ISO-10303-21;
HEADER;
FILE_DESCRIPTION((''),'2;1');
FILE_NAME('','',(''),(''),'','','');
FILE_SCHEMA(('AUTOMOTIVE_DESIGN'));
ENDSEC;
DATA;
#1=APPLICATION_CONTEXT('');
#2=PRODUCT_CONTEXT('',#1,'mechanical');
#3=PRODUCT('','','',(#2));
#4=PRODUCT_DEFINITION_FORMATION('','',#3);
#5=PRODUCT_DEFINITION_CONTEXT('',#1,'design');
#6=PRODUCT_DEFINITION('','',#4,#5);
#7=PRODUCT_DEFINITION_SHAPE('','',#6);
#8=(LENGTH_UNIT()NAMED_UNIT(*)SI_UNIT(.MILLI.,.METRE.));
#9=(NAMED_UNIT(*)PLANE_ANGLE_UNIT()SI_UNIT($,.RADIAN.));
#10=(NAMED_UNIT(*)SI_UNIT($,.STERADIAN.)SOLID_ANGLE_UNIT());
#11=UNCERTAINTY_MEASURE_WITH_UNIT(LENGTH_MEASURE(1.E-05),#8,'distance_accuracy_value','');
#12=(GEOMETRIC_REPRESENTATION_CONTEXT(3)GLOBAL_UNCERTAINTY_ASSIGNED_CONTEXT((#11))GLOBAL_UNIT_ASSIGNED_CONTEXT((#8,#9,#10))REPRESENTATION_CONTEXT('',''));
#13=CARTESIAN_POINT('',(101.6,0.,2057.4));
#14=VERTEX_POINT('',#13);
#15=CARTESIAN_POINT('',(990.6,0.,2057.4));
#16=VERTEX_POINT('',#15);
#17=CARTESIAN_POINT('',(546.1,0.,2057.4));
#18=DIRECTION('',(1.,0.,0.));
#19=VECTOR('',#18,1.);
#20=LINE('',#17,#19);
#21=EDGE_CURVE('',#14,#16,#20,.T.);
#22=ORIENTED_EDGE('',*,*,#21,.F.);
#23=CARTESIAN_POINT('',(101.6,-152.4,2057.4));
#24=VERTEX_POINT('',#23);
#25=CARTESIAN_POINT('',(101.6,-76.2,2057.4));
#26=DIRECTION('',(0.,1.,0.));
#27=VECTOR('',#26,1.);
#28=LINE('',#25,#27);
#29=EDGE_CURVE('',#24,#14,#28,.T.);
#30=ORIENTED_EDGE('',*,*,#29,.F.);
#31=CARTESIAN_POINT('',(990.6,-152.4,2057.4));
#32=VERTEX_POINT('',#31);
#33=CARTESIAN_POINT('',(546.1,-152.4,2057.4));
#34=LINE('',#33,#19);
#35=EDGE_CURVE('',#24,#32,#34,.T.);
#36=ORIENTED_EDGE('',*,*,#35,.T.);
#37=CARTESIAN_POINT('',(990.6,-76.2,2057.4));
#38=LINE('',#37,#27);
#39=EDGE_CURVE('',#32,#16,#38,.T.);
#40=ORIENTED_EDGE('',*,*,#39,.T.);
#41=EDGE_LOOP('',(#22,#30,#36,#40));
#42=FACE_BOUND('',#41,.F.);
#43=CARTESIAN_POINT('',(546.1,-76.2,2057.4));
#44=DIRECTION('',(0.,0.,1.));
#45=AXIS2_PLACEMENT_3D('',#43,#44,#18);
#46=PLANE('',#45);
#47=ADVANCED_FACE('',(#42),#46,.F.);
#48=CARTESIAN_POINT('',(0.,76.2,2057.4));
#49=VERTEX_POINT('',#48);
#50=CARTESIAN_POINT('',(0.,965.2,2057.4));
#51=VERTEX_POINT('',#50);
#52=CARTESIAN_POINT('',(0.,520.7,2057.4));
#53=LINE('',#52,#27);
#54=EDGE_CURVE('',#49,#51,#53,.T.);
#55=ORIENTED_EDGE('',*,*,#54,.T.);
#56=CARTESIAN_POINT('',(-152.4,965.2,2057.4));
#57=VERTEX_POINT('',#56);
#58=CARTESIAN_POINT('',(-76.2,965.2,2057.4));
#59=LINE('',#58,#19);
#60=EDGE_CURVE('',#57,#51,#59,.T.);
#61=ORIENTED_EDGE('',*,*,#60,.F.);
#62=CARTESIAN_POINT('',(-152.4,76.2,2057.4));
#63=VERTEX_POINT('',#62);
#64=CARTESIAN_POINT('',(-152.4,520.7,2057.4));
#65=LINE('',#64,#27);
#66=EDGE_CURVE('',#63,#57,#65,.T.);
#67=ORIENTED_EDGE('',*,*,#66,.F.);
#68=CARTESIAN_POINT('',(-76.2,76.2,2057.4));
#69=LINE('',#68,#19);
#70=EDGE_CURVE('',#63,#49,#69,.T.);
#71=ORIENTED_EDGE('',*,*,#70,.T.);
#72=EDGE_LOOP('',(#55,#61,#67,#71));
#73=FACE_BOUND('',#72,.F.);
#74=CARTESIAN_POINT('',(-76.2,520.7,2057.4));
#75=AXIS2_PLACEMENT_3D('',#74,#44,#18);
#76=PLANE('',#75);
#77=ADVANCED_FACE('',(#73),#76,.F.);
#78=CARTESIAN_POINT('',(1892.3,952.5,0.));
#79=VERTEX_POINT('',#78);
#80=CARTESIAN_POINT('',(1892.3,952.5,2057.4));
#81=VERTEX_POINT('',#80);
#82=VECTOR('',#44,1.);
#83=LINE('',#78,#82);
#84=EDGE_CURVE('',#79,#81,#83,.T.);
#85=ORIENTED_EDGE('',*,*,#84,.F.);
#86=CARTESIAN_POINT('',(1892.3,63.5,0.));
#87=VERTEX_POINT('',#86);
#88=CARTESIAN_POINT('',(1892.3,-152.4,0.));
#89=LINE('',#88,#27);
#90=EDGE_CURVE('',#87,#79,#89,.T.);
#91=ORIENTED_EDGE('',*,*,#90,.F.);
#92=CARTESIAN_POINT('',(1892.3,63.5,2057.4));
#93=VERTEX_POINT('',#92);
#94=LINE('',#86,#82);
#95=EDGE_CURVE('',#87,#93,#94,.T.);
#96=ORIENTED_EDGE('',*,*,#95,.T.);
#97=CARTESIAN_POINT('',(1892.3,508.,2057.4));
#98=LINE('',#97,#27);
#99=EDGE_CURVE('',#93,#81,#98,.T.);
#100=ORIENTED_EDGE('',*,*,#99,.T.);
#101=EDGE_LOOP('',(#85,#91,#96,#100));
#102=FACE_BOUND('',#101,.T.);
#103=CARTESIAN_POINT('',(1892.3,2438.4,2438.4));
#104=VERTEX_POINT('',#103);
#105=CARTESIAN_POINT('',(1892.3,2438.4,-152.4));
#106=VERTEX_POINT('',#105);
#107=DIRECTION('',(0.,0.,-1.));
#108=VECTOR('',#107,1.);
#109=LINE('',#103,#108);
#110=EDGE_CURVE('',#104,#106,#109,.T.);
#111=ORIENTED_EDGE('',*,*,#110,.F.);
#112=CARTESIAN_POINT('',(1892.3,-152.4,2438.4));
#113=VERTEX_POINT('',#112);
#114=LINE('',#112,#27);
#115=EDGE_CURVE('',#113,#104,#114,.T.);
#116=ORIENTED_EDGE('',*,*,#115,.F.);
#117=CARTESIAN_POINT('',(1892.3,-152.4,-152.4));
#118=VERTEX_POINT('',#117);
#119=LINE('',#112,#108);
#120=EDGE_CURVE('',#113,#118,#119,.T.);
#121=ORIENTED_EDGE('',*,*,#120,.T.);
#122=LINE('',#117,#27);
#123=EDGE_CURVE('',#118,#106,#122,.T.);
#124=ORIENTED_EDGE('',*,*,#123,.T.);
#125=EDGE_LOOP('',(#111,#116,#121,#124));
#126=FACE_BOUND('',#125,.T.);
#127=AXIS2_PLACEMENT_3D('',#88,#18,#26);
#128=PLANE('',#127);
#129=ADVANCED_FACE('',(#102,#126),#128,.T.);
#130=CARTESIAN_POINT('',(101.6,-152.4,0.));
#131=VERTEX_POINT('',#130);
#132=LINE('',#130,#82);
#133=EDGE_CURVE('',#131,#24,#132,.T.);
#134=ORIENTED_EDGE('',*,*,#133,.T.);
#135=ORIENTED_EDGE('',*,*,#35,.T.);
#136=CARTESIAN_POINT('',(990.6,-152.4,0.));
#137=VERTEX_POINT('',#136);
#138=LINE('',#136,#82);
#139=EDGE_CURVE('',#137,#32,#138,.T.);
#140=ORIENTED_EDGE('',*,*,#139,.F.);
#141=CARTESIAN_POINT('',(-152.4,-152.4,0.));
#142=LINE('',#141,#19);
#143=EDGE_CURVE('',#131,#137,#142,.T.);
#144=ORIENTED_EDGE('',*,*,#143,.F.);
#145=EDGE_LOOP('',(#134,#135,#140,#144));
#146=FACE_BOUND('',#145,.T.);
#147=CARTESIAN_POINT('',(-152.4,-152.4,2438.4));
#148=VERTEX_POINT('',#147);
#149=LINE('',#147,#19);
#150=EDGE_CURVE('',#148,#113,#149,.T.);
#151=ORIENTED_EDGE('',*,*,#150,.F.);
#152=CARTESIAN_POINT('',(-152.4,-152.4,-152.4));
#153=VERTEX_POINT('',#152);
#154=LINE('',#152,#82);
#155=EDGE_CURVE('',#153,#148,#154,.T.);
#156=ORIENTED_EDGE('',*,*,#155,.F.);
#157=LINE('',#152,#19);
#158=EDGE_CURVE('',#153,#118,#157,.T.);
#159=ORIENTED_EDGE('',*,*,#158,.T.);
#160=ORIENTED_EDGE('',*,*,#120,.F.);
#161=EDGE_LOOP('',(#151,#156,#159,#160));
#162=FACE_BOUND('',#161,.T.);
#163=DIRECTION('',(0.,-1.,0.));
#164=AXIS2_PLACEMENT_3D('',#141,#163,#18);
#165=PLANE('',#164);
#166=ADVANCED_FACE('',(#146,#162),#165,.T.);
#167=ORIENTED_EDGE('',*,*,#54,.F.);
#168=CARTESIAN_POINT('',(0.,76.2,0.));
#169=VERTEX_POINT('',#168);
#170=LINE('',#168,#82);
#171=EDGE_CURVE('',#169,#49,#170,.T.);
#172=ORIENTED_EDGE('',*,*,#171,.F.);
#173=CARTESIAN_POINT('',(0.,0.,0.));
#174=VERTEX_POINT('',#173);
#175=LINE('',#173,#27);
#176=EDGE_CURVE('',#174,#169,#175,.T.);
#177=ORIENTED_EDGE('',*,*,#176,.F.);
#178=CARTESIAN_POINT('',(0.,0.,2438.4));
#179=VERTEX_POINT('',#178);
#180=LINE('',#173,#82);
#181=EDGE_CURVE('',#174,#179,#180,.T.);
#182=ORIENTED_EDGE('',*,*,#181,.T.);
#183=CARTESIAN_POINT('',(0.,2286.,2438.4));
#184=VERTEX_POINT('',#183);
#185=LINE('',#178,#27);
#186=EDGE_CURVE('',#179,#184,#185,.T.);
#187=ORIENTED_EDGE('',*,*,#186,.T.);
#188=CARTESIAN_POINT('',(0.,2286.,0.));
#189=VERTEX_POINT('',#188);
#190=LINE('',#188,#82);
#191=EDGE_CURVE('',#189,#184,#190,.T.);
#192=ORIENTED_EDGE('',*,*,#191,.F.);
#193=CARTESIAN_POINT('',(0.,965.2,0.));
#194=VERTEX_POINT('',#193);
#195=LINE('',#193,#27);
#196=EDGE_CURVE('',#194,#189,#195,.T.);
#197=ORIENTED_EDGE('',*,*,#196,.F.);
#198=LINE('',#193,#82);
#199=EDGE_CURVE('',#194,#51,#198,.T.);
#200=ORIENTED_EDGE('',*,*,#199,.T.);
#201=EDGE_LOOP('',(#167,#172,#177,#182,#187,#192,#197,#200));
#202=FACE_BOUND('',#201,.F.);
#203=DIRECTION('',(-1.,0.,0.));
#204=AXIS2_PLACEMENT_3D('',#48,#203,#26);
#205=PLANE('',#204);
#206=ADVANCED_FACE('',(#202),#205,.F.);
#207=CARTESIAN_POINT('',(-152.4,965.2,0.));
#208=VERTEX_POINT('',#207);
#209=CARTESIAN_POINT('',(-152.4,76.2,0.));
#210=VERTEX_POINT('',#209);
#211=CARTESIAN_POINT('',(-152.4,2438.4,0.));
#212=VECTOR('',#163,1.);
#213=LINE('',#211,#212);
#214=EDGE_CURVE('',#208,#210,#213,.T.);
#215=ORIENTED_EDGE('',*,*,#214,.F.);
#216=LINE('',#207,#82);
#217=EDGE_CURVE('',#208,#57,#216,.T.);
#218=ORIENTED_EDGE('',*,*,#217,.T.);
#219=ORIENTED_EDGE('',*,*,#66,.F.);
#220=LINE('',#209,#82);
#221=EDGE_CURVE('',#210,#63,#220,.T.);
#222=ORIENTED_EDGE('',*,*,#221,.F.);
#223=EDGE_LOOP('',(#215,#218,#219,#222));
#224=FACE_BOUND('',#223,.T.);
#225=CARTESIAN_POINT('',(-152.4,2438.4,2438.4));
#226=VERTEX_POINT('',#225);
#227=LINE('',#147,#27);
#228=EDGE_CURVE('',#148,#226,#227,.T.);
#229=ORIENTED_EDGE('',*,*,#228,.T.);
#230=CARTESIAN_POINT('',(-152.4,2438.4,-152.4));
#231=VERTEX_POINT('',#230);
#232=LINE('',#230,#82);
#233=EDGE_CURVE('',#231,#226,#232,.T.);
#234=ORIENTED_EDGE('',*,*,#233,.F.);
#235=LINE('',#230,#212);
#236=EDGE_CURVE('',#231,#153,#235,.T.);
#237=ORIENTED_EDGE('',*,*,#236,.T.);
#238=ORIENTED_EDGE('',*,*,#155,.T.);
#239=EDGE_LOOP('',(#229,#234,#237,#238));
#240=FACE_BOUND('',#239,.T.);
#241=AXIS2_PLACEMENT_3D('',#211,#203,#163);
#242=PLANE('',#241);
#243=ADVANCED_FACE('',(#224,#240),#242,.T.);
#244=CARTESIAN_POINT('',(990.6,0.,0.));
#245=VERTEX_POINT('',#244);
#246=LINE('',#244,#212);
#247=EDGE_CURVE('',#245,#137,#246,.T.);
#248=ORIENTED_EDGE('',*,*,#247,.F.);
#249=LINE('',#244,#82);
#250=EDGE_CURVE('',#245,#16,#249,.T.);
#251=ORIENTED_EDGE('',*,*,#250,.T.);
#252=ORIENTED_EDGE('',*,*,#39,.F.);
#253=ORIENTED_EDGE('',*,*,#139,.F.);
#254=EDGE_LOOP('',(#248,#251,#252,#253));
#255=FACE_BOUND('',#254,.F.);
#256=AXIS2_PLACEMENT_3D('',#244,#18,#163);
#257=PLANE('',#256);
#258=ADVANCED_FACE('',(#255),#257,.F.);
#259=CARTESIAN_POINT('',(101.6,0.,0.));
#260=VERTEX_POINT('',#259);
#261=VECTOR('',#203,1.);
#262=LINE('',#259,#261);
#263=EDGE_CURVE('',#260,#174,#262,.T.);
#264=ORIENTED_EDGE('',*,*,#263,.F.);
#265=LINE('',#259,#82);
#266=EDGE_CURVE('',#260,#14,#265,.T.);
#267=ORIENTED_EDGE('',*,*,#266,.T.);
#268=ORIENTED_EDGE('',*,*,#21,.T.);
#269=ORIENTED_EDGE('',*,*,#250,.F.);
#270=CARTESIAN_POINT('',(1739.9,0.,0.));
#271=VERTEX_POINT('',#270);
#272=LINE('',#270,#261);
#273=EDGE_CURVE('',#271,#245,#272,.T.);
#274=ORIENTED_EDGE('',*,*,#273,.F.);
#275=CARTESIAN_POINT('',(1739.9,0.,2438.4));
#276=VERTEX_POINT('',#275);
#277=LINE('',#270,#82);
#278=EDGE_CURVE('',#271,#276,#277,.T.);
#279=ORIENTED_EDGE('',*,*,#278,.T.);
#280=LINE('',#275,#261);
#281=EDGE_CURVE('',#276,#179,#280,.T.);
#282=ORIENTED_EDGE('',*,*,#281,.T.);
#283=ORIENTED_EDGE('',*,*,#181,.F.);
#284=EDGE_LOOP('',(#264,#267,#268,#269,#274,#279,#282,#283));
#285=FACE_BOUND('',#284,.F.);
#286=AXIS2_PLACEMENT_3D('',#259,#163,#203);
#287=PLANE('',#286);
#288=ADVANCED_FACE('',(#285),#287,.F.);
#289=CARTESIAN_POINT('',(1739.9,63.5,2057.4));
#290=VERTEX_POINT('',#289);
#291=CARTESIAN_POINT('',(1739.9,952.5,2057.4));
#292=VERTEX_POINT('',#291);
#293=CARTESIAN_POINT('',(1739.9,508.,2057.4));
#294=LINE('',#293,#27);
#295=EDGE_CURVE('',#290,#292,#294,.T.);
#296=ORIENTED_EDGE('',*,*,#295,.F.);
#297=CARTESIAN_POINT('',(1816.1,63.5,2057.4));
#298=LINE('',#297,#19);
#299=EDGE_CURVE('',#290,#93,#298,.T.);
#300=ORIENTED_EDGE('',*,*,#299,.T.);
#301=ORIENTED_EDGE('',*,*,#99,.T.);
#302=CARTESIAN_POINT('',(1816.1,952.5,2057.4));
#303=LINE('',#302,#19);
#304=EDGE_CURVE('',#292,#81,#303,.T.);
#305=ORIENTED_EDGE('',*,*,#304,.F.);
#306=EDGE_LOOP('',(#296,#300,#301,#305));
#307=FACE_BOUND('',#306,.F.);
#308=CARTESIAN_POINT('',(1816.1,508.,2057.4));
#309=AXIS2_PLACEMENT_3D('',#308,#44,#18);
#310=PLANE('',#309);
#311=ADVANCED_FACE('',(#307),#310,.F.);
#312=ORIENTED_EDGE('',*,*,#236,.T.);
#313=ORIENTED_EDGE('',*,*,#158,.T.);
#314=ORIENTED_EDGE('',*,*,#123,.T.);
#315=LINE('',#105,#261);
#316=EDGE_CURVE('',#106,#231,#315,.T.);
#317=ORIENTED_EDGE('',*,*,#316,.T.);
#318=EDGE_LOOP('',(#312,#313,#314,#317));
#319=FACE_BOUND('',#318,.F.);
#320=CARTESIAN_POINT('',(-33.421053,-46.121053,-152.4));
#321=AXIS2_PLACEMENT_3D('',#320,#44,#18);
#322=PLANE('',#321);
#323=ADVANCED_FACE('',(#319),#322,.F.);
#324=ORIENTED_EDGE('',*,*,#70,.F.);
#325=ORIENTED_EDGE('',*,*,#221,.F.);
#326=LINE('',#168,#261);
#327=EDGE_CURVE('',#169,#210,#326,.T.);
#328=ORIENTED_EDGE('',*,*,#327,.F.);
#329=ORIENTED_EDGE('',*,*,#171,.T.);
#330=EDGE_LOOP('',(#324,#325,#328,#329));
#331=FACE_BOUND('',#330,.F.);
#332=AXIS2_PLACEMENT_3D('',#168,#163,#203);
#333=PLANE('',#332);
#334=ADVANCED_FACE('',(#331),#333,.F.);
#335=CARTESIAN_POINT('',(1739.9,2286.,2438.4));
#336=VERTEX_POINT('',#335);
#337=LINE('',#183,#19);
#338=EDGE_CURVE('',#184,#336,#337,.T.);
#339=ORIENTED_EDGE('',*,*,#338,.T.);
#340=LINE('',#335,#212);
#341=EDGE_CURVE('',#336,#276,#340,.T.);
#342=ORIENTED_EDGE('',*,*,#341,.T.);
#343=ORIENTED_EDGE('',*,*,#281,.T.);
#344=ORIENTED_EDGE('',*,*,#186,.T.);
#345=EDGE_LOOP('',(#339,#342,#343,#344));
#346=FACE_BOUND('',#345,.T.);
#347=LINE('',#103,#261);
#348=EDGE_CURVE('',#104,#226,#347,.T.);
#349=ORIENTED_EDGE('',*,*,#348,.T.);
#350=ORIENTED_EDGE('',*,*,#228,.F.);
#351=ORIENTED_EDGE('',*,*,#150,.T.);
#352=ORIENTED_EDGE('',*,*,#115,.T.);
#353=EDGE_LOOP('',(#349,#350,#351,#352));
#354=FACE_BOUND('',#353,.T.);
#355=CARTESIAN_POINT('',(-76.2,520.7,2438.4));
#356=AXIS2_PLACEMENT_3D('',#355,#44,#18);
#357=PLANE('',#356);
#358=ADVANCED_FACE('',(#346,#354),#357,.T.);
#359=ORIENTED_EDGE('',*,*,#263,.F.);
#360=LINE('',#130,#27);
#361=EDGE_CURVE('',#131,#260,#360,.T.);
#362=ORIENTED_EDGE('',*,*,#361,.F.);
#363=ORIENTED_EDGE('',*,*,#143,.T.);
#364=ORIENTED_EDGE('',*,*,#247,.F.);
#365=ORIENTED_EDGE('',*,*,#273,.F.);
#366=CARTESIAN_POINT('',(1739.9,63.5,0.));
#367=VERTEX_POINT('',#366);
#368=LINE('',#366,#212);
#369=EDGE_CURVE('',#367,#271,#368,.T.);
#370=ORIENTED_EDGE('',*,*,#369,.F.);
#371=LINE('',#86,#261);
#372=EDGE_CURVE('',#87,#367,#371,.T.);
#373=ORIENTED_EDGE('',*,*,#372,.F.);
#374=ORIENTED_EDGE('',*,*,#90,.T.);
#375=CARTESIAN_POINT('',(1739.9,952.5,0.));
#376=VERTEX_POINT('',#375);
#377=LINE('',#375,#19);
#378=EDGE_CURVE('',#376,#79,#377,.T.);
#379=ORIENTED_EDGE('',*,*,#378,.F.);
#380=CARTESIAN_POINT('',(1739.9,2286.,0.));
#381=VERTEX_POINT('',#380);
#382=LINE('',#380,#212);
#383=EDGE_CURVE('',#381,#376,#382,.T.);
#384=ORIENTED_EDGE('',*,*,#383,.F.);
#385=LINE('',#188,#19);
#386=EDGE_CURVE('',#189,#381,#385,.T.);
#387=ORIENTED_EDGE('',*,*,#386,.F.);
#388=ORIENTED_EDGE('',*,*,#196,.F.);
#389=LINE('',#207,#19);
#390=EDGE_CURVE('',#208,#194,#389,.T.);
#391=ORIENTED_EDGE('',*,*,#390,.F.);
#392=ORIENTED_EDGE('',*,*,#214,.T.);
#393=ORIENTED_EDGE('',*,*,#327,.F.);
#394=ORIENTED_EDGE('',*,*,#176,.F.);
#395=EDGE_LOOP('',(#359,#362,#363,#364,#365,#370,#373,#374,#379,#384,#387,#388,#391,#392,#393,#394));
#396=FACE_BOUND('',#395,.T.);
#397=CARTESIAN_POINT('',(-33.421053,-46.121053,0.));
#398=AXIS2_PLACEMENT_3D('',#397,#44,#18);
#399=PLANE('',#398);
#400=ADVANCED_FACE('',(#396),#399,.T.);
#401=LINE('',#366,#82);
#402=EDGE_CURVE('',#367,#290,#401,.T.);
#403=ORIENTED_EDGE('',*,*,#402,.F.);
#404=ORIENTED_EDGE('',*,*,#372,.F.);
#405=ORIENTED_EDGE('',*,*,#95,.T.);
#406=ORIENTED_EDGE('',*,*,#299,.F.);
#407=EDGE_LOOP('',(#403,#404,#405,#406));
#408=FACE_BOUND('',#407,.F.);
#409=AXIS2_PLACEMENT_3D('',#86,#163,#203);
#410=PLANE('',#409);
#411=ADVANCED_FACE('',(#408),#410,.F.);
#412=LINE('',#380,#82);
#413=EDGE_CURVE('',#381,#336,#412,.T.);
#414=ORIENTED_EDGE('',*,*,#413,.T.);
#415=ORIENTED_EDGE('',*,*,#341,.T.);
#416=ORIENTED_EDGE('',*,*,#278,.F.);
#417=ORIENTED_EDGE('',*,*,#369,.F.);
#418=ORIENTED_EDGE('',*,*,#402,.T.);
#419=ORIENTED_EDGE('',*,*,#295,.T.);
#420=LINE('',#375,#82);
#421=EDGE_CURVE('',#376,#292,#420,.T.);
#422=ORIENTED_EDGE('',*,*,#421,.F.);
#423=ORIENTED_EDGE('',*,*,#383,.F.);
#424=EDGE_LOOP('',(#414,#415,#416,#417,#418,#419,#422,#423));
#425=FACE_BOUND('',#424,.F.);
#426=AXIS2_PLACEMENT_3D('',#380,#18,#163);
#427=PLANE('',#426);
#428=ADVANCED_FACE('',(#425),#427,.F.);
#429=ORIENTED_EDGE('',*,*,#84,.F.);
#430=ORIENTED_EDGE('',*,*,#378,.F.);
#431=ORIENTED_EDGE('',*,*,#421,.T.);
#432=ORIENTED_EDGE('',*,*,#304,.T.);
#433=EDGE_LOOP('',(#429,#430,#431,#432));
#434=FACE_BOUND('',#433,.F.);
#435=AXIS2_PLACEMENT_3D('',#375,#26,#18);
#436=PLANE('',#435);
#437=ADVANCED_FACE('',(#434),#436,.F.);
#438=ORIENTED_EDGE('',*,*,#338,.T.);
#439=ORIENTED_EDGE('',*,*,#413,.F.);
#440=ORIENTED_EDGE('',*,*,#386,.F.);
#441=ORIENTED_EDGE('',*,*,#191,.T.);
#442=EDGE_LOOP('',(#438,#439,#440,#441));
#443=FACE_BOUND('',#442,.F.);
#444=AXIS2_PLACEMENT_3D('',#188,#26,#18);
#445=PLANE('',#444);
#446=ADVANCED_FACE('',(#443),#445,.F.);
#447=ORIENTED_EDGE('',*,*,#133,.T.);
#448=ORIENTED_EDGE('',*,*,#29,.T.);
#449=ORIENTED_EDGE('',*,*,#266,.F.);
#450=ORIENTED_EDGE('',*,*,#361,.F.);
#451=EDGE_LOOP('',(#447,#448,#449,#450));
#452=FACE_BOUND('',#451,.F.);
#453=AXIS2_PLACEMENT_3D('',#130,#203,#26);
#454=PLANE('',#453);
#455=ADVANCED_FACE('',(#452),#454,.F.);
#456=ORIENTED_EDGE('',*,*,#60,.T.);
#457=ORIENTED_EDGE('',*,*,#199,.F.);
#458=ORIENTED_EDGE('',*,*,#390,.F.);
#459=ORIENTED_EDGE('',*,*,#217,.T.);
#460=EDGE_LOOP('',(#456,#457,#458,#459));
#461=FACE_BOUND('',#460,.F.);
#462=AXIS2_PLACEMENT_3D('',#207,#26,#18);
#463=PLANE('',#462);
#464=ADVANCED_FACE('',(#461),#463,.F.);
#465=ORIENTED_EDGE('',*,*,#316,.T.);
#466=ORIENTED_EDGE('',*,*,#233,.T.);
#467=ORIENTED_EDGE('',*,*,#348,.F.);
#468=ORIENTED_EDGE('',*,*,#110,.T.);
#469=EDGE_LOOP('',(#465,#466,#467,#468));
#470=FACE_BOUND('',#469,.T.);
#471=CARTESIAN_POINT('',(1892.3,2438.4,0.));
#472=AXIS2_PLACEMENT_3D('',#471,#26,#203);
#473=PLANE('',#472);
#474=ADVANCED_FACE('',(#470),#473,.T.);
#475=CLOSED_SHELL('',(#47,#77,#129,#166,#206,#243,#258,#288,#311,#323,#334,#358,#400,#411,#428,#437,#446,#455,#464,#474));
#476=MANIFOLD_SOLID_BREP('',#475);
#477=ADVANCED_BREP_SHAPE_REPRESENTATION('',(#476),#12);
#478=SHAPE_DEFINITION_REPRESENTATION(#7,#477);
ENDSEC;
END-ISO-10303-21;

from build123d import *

# Parameters (mm, degrees)
F1_DEPTH = 2438.4
F2_START = 2057.4
F0_W     = 152.4
F0_H     = 889
F0_W_2   = 889
F0_H_2   = 152.4
F2_DEPTH = 381
F0_W_3   = 101.6
F0_H_3   = 76.2
F3_DEPTH = 152.4


with BuildPart() as f1:
    # F0 (on Top) → F1 (new body)
    with BuildSketch(Plane.XY):
        Polygon((-152.4, 965.2), (0, 965.2), (0, 2286), (1739.9, 2286), (1739.9, 952.5), (1892.3, 952.5), (1892.3, 2438.4), (-152.4, 2438.4), align=None)
    extrude(amount=F1_DEPTH)



with BuildPart() as f1b:
    # F0 (on Top) → F1, piece 2 (new body)
    with BuildSketch(Plane.XY):
        Polygon((1739.9, 0), (990.6, 0), (990.6, -152.4), (1892.3, -152.4), (1892.3, 63.5), (1739.9, 63.5), align=None)
    extrude(amount=F1_DEPTH)


with BuildPart() as f1c:
    # F0 (on Top) → F1, piece 3 (new body)
    with BuildSketch(Plane.XY):
        Polygon((101.6, 0), (0, 0), (0, 76.2), (-152.4, 76.2), (-152.4, -152.4), (101.6, -152.4), align=None)
    extrude(amount=F1_DEPTH)


with BuildPart() as f1_1:
    add(f1.part)

    add(f1b.part)  # F2 merges F1b

    add(f1c.part)  # F2 merges F1c
    # F0 (on Top) → F2 (join)
    with BuildSketch(Plane.XY.offset(F2_START)):
        with Locations((-76.2, 520.7)):
            Rectangle(F0_W, F0_H)
        with Locations((1816.1, 508)):
            Rectangle(F0_W, F0_H)
        with Locations((546.1, -76.2)):
            Rectangle(F0_W_2, F0_H_2)
    extrude(amount=F2_DEPTH)

    # F0 (on Top) → F3 (join)
    with BuildSketch(Plane.XY):
        Polygon((101.6, 0), (0, 0), (0, 76.2), (-152.4, 76.2), (-152.4, -152.4), (101.6, -152.4), align=None)
        with Locations((546.1, -76.2)):
            Rectangle(F0_W_2, F0_H_2)
        with Locations((-76.2, 520.7)):
            Rectangle(F0_W, F0_H)
        Polygon((1739.9, 0), (990.6, 0), (990.6, -152.4), (1892.3, -152.4), (1892.3, 63.5), (1739.9, 63.5), align=None)
        Polygon((-152.4, 965.2), (0, 965.2), (0, 2286), (1739.9, 2286), (1739.9, 952.5), (1892.3, 952.5), (1892.3, 2438.4), (-152.4, 2438.4), align=None)
        with Locations((1816.1, 508)):
            Rectangle(F0_W, F0_H)
        with BuildLine():
            ThreePointArc((850.9, 952.5), (1111.2820715252, 323.8820715252), (1739.9, 63.5))
            Line((1739.9, 63.5), (1739.9, 952.5))
            Line((1739.9, 952.5), (850.9, 952.5))
        make_face()
        with BuildLine():
            ThreePointArc((582.8375456676, 747.4833942235), (882.0297463893, 425.7351417851), (990.6, 0))
            Line((990.6, 0), (1739.9, 0))
            Line((1739.9, 0), (1739.9, 63.5))
            ThreePointArc((1739.9, 63.5), (1111.2820715252, 323.8820715252), (850.9, 952.5))
            Line((850.9, 952.5), (1739.9, 952.5))
            Line((1739.9, 952.5), (1739.9, 2286))
            Line((1739.9, 2286), (0, 2286))
            Line((0, 2286), (0, 965.2))
            ThreePointArc((0, 965.2), (311.0868548616, 908.9940734253), (582.8375456676, 747.4833942235))
        make_face()
        with BuildLine():
            Line((101.6, 889), (101.6, 76.2))
            Line((101.6, 76.2), (889, 76.2))
            ThreePointArc((889, 76.2), (808.8459612616, 445.1027120404), (582.8375456676, 747.4833942235))
            ThreePointArc((582.8375456676, 747.4833942235), (352.4069601659, 852.8873716572), (101.6, 889))
        make_face()
        with BuildLine():
            Line((0, 965.2), (0, 76.2))
            Line((0, 76.2), (101.6, 76.2))
            Line((101.6, 76.2), (101.6, 889))
            ThreePointArc((101.6, 889), (352.4069601659, 852.8873716572), (582.8375456676, 747.4833942235))
            ThreePointArc((582.8375456676, 747.4833942235), (311.0868548616, 908.9940734253), (0, 965.2))
        make_face()
        with BuildLine():
            Line((101.6, 76.2), (101.6, 0))
            Line((101.6, 0), (990.6, 0))
            ThreePointArc((990.6, 0), (882.0297463893, 425.7351417851), (582.8375456676, 747.4833942235))
            ThreePointArc((582.8375456676, 747.4833942235), (808.8459612616, 445.1027120404), (889, 76.2))
            Line((889, 76.2), (101.6, 76.2))
        make_face()
        with Locations((50.8, 38.1)):
            Rectangle(F0_W_3, F0_H_3)
    extrude(amount=-F3_DEPTH)


solid = f1_1.part
